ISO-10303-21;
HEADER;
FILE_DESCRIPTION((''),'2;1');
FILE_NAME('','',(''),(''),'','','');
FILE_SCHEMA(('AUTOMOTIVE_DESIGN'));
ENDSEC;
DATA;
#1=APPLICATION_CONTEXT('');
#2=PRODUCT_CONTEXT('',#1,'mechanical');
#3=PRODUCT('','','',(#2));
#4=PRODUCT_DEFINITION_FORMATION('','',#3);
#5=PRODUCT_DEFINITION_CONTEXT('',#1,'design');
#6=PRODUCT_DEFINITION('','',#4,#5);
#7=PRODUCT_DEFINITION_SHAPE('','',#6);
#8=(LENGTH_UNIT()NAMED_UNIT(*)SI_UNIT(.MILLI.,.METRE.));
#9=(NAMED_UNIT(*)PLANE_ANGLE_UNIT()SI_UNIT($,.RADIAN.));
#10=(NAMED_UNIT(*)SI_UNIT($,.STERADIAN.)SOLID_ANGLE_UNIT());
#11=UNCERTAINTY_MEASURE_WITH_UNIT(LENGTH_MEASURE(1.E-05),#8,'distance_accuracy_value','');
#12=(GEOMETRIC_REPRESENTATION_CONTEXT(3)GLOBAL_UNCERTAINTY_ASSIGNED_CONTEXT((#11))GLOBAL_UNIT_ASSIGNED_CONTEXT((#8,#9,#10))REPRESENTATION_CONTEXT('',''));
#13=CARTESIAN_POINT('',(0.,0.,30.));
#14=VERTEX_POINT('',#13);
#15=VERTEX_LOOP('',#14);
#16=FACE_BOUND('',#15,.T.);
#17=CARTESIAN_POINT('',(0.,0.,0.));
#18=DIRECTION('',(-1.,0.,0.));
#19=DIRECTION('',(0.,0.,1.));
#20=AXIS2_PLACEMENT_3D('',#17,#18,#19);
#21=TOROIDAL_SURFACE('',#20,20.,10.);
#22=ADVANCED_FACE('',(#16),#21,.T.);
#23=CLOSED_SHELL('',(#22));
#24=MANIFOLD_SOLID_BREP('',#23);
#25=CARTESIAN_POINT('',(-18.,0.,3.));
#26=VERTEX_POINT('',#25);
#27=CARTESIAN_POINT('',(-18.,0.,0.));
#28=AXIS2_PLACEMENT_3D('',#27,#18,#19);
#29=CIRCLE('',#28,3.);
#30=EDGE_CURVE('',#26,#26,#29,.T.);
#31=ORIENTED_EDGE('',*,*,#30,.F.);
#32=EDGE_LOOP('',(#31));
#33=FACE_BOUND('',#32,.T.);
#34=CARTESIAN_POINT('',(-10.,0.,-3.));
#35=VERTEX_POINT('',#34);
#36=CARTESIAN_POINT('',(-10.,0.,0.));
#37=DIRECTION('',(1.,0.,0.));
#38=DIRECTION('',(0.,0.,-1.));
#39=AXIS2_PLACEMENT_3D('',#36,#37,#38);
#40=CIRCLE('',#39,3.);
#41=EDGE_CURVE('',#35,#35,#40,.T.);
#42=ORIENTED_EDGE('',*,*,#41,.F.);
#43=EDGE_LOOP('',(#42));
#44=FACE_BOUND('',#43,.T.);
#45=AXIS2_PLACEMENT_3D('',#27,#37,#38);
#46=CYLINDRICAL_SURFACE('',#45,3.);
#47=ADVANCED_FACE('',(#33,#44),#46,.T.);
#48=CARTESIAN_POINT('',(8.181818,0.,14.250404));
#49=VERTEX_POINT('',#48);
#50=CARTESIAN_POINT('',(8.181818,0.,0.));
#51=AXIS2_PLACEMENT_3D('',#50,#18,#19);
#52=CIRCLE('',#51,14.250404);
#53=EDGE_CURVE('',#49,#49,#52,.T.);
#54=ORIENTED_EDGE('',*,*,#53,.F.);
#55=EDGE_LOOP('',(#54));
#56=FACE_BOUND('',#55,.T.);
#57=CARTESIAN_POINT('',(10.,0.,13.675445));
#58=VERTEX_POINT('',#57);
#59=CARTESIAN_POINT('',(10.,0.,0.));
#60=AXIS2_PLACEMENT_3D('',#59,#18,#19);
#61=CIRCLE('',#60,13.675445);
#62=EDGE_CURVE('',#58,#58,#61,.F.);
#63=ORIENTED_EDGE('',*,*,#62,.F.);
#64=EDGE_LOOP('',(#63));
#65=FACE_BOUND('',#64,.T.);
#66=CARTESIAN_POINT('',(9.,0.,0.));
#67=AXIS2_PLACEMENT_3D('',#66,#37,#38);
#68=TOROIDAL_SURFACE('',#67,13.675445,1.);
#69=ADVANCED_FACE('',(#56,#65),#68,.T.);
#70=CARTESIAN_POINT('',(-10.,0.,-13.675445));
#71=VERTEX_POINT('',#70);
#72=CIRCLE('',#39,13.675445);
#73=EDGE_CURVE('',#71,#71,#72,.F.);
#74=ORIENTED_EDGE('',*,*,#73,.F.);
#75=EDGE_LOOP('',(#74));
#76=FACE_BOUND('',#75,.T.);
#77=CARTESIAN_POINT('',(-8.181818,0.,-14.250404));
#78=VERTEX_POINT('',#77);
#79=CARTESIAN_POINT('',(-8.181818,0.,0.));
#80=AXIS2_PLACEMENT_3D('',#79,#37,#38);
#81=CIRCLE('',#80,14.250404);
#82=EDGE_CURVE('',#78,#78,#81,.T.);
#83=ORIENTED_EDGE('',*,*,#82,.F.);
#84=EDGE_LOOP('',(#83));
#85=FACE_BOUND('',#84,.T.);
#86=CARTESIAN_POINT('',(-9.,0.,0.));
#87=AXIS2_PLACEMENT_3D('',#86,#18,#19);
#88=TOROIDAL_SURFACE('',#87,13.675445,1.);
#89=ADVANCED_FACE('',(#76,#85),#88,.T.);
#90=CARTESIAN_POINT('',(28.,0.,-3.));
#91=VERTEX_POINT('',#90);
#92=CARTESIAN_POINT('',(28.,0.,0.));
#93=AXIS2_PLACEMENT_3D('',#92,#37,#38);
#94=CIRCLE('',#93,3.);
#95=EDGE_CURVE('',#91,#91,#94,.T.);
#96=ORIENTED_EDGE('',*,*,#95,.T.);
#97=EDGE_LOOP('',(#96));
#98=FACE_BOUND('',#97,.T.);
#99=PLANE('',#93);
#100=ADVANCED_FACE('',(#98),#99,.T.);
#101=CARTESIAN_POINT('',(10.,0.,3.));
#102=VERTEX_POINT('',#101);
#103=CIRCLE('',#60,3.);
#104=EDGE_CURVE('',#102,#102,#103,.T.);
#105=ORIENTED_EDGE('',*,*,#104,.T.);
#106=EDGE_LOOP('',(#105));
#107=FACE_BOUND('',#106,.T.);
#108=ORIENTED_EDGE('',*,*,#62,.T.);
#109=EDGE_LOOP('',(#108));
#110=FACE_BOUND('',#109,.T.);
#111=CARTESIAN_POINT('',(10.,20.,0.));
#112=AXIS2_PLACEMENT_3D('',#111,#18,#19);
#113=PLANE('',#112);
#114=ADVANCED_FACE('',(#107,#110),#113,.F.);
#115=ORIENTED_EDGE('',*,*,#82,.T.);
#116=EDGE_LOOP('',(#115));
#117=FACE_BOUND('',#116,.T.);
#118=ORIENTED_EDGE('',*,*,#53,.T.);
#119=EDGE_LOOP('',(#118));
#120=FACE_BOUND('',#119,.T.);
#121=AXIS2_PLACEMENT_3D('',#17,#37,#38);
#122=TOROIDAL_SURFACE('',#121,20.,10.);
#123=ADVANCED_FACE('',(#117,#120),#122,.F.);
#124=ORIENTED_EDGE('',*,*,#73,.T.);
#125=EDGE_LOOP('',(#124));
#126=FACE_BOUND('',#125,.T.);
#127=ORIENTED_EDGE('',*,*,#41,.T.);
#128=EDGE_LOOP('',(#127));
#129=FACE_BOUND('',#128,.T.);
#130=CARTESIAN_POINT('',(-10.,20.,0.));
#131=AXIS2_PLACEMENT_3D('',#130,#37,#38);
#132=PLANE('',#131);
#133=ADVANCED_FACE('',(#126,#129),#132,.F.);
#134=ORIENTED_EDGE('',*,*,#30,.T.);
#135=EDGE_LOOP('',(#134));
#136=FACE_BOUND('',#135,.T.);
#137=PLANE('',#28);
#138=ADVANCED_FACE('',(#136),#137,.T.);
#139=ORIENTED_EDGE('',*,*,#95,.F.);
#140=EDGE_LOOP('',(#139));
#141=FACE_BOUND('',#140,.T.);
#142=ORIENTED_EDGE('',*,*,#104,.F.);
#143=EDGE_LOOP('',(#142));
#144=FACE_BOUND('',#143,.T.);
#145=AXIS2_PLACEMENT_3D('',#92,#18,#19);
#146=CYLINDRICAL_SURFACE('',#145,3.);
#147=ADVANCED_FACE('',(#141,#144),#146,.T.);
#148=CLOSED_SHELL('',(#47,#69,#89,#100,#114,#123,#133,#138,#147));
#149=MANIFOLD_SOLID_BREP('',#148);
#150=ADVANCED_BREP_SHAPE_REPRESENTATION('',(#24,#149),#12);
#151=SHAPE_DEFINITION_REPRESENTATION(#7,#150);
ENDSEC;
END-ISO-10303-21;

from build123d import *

# Parameters (mm, degrees)
SKETCH_5_W      = 12
SKETCH_5_H      = 10
EXTRUDE_3_DEPTH = 1
FILLET_2_R      = 1
SKETCH_6_R      = 10
SKETCH_10_R     = 3
EXTRUDE_6_DEPTH = 18
SKETCH_11_R     = 3
EXTRUDE_7_DEPTH = 8


with BuildPart() as part:
    # 草图5 → 凸台-拉伸3 (new body)
    with BuildSketch(Plane.XY):
        Rectangle(SKETCH_5_W, SKETCH_5_H)
    extrude(amount=EXTRUDE_3_DEPTH)

    # 草图9 → 旋转1 (revolve)
    with BuildSketch(Plane(origin=(0, 0, 0), x_dir=(-1, 0, 0), z_dir=(0, 0, -1))):
        with BuildLine():
            Line((10, 20), (10, 0))
            Line((10, 0), (-10, 0))
            Line((-10, 0), (-10, 20))
            ThreePointArc((-10, 20), (0, 10), (10, 20))
        make_face()
    revolve(axis=Axis((10, 0, 0), (-1, 0, 0)))

    # 圆角2
    fillet_2_edges = [part.edges().sort_by_distance(p)[0] for p in [
        (10, -20, 0),
    ]]
    fillet(fillet_2_edges, radius=FILLET_2_R)
    fillet_2_2_edges = [part.edges().sort_by_distance(p)[0] for p in [
        (-10, -20, 0),
    ]]
    fillet(fillet_2_2_edges, radius=FILLET_2_R)


with BuildPart() as body_2:
    # 扫描3: sweep along a path in 草图7
    with BuildLine(Plane(origin=(0, 0, 0), x_dir=(0, 0, -1), z_dir=(1, 0, 0))) as sweep_3_path:
        CenterArc((0, 0), 20, 0, 360)
    # 草图6 → 扫描3 (sweep)
    with BuildSketch(Plane.XY):
        with Locations((0, 20)):
            Circle(SKETCH_6_R)
    sweep(path=sweep_3_path.line)


with BuildPart() as body_3:
    # 草图10 → 凸台-拉伸6 (new body)
    with BuildSketch(Plane(origin=(10, 0, 0), x_dir=(0, 0, -1), z_dir=(1, 0, 0))):
        Circle(SKETCH_10_R)
    extrude(amount=EXTRUDE_6_DEPTH)

    # Combine 1: union part
    add(part.part)


with BuildPart() as body_3_2:
    # 草图11 → 凸台-拉伸7 (new body)
    with BuildSketch(Plane.ZY.offset(10)):
        Circle(SKETCH_11_R)
    extrude(amount=EXTRUDE_7_DEPTH)

    # Combine 2: union body 3
    add(body_3.part)


solid = Compound([body_2.part, body_3_2.part])
